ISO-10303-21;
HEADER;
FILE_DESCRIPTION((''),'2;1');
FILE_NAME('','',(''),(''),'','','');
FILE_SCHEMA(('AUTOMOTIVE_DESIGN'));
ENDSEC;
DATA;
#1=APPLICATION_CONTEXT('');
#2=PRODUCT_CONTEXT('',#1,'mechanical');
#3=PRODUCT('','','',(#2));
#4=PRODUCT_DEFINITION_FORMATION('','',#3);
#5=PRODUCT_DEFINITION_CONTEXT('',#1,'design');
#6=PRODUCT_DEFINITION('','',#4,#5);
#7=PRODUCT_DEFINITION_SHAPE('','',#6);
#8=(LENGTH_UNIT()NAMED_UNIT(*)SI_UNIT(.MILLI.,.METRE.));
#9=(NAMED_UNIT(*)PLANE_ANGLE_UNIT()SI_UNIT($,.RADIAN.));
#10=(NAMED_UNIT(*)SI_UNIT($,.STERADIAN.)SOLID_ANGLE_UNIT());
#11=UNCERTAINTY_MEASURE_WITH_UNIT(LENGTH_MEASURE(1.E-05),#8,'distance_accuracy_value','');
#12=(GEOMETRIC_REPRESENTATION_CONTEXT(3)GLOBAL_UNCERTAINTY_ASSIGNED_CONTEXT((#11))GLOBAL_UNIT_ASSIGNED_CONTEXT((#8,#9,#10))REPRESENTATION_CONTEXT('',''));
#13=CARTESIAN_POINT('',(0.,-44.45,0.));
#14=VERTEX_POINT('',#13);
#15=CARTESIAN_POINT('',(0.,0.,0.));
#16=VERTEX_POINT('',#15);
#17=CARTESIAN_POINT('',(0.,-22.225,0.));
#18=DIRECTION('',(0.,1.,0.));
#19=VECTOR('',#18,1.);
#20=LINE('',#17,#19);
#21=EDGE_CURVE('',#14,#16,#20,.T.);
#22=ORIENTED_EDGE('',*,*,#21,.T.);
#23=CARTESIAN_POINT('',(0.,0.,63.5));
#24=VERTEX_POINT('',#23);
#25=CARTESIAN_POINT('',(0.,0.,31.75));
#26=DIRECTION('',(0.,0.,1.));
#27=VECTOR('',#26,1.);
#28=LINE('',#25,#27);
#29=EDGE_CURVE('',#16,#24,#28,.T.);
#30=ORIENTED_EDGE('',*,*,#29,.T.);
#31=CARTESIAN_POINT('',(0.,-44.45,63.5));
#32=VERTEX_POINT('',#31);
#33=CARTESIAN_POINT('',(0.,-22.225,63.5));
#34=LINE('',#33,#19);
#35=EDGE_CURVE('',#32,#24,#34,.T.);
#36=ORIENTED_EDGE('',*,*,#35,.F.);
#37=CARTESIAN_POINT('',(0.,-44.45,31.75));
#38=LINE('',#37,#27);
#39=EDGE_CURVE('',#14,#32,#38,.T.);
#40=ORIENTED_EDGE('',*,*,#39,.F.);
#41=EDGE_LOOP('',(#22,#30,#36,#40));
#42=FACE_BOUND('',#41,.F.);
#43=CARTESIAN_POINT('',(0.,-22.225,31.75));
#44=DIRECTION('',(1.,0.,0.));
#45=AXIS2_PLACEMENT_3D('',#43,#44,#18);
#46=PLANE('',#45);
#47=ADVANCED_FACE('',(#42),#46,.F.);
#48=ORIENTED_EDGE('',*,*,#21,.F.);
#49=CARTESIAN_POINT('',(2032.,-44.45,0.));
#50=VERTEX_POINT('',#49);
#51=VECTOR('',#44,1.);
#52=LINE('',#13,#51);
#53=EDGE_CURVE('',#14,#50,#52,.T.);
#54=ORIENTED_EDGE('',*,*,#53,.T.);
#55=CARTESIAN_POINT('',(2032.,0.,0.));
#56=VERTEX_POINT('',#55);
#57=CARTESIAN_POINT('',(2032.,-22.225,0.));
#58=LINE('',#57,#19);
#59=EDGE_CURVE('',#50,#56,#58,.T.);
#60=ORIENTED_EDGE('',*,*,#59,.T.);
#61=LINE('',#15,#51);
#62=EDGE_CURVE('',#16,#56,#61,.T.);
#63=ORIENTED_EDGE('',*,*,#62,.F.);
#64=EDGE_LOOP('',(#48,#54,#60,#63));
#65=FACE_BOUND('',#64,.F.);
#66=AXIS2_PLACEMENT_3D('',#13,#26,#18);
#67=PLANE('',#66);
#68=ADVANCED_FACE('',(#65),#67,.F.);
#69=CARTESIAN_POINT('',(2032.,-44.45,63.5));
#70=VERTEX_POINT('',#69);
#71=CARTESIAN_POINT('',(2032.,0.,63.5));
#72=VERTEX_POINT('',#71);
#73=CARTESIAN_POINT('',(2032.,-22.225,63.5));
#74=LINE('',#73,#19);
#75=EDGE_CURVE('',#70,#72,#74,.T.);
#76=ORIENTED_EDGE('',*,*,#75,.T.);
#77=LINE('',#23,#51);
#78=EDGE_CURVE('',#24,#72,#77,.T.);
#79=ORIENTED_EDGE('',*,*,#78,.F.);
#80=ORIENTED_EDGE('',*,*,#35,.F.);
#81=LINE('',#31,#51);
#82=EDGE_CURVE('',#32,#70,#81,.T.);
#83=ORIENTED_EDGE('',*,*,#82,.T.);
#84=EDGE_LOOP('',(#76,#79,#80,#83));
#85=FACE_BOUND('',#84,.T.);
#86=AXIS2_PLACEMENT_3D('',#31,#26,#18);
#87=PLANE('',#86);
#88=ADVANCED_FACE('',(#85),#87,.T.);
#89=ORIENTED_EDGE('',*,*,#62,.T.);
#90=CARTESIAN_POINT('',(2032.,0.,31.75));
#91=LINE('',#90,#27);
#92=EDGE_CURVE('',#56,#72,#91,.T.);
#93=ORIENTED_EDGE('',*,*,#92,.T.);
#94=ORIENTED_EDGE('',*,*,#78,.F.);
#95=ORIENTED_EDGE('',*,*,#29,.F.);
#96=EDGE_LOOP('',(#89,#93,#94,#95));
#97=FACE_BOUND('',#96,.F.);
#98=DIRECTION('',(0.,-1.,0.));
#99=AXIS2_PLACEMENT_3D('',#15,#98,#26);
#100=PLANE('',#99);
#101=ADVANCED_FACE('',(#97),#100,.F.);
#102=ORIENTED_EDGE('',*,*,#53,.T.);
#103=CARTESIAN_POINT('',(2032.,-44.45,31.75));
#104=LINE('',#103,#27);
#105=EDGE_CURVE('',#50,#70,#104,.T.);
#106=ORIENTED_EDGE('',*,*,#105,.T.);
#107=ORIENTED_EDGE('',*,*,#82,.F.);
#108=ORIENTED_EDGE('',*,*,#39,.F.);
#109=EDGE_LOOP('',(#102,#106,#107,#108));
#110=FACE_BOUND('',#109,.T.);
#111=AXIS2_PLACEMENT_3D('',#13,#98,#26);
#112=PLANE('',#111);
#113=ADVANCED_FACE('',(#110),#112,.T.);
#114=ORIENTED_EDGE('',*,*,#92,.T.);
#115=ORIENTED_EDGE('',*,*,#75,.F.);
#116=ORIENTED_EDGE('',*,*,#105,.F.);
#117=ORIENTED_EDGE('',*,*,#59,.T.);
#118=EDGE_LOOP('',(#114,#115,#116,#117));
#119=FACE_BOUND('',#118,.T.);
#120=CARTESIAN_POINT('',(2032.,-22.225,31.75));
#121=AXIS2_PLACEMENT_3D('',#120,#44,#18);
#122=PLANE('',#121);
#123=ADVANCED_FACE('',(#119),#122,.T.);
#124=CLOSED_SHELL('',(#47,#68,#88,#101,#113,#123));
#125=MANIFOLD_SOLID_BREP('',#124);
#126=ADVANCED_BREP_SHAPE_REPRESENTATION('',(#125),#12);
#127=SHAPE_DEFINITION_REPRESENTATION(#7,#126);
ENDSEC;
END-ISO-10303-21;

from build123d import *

# Parameters (mm, degrees)
F1_W     = 44.45
F1_H     = 63.5
F2_DEPTH = 2032


# Not quite as in the source:
# - a variable given as a bare number and used for a length is read in inches; the dataset says mm whatever the document's units were


with BuildPart() as f2:
    # F1 (on Right) → F2 (new body)
    with BuildSketch(Plane.YZ):
        with Locations((-22.225, 31.75)):
            Rectangle(F1_W, F1_H)
    extrude(amount=F2_DEPTH)


solid = f2.part
